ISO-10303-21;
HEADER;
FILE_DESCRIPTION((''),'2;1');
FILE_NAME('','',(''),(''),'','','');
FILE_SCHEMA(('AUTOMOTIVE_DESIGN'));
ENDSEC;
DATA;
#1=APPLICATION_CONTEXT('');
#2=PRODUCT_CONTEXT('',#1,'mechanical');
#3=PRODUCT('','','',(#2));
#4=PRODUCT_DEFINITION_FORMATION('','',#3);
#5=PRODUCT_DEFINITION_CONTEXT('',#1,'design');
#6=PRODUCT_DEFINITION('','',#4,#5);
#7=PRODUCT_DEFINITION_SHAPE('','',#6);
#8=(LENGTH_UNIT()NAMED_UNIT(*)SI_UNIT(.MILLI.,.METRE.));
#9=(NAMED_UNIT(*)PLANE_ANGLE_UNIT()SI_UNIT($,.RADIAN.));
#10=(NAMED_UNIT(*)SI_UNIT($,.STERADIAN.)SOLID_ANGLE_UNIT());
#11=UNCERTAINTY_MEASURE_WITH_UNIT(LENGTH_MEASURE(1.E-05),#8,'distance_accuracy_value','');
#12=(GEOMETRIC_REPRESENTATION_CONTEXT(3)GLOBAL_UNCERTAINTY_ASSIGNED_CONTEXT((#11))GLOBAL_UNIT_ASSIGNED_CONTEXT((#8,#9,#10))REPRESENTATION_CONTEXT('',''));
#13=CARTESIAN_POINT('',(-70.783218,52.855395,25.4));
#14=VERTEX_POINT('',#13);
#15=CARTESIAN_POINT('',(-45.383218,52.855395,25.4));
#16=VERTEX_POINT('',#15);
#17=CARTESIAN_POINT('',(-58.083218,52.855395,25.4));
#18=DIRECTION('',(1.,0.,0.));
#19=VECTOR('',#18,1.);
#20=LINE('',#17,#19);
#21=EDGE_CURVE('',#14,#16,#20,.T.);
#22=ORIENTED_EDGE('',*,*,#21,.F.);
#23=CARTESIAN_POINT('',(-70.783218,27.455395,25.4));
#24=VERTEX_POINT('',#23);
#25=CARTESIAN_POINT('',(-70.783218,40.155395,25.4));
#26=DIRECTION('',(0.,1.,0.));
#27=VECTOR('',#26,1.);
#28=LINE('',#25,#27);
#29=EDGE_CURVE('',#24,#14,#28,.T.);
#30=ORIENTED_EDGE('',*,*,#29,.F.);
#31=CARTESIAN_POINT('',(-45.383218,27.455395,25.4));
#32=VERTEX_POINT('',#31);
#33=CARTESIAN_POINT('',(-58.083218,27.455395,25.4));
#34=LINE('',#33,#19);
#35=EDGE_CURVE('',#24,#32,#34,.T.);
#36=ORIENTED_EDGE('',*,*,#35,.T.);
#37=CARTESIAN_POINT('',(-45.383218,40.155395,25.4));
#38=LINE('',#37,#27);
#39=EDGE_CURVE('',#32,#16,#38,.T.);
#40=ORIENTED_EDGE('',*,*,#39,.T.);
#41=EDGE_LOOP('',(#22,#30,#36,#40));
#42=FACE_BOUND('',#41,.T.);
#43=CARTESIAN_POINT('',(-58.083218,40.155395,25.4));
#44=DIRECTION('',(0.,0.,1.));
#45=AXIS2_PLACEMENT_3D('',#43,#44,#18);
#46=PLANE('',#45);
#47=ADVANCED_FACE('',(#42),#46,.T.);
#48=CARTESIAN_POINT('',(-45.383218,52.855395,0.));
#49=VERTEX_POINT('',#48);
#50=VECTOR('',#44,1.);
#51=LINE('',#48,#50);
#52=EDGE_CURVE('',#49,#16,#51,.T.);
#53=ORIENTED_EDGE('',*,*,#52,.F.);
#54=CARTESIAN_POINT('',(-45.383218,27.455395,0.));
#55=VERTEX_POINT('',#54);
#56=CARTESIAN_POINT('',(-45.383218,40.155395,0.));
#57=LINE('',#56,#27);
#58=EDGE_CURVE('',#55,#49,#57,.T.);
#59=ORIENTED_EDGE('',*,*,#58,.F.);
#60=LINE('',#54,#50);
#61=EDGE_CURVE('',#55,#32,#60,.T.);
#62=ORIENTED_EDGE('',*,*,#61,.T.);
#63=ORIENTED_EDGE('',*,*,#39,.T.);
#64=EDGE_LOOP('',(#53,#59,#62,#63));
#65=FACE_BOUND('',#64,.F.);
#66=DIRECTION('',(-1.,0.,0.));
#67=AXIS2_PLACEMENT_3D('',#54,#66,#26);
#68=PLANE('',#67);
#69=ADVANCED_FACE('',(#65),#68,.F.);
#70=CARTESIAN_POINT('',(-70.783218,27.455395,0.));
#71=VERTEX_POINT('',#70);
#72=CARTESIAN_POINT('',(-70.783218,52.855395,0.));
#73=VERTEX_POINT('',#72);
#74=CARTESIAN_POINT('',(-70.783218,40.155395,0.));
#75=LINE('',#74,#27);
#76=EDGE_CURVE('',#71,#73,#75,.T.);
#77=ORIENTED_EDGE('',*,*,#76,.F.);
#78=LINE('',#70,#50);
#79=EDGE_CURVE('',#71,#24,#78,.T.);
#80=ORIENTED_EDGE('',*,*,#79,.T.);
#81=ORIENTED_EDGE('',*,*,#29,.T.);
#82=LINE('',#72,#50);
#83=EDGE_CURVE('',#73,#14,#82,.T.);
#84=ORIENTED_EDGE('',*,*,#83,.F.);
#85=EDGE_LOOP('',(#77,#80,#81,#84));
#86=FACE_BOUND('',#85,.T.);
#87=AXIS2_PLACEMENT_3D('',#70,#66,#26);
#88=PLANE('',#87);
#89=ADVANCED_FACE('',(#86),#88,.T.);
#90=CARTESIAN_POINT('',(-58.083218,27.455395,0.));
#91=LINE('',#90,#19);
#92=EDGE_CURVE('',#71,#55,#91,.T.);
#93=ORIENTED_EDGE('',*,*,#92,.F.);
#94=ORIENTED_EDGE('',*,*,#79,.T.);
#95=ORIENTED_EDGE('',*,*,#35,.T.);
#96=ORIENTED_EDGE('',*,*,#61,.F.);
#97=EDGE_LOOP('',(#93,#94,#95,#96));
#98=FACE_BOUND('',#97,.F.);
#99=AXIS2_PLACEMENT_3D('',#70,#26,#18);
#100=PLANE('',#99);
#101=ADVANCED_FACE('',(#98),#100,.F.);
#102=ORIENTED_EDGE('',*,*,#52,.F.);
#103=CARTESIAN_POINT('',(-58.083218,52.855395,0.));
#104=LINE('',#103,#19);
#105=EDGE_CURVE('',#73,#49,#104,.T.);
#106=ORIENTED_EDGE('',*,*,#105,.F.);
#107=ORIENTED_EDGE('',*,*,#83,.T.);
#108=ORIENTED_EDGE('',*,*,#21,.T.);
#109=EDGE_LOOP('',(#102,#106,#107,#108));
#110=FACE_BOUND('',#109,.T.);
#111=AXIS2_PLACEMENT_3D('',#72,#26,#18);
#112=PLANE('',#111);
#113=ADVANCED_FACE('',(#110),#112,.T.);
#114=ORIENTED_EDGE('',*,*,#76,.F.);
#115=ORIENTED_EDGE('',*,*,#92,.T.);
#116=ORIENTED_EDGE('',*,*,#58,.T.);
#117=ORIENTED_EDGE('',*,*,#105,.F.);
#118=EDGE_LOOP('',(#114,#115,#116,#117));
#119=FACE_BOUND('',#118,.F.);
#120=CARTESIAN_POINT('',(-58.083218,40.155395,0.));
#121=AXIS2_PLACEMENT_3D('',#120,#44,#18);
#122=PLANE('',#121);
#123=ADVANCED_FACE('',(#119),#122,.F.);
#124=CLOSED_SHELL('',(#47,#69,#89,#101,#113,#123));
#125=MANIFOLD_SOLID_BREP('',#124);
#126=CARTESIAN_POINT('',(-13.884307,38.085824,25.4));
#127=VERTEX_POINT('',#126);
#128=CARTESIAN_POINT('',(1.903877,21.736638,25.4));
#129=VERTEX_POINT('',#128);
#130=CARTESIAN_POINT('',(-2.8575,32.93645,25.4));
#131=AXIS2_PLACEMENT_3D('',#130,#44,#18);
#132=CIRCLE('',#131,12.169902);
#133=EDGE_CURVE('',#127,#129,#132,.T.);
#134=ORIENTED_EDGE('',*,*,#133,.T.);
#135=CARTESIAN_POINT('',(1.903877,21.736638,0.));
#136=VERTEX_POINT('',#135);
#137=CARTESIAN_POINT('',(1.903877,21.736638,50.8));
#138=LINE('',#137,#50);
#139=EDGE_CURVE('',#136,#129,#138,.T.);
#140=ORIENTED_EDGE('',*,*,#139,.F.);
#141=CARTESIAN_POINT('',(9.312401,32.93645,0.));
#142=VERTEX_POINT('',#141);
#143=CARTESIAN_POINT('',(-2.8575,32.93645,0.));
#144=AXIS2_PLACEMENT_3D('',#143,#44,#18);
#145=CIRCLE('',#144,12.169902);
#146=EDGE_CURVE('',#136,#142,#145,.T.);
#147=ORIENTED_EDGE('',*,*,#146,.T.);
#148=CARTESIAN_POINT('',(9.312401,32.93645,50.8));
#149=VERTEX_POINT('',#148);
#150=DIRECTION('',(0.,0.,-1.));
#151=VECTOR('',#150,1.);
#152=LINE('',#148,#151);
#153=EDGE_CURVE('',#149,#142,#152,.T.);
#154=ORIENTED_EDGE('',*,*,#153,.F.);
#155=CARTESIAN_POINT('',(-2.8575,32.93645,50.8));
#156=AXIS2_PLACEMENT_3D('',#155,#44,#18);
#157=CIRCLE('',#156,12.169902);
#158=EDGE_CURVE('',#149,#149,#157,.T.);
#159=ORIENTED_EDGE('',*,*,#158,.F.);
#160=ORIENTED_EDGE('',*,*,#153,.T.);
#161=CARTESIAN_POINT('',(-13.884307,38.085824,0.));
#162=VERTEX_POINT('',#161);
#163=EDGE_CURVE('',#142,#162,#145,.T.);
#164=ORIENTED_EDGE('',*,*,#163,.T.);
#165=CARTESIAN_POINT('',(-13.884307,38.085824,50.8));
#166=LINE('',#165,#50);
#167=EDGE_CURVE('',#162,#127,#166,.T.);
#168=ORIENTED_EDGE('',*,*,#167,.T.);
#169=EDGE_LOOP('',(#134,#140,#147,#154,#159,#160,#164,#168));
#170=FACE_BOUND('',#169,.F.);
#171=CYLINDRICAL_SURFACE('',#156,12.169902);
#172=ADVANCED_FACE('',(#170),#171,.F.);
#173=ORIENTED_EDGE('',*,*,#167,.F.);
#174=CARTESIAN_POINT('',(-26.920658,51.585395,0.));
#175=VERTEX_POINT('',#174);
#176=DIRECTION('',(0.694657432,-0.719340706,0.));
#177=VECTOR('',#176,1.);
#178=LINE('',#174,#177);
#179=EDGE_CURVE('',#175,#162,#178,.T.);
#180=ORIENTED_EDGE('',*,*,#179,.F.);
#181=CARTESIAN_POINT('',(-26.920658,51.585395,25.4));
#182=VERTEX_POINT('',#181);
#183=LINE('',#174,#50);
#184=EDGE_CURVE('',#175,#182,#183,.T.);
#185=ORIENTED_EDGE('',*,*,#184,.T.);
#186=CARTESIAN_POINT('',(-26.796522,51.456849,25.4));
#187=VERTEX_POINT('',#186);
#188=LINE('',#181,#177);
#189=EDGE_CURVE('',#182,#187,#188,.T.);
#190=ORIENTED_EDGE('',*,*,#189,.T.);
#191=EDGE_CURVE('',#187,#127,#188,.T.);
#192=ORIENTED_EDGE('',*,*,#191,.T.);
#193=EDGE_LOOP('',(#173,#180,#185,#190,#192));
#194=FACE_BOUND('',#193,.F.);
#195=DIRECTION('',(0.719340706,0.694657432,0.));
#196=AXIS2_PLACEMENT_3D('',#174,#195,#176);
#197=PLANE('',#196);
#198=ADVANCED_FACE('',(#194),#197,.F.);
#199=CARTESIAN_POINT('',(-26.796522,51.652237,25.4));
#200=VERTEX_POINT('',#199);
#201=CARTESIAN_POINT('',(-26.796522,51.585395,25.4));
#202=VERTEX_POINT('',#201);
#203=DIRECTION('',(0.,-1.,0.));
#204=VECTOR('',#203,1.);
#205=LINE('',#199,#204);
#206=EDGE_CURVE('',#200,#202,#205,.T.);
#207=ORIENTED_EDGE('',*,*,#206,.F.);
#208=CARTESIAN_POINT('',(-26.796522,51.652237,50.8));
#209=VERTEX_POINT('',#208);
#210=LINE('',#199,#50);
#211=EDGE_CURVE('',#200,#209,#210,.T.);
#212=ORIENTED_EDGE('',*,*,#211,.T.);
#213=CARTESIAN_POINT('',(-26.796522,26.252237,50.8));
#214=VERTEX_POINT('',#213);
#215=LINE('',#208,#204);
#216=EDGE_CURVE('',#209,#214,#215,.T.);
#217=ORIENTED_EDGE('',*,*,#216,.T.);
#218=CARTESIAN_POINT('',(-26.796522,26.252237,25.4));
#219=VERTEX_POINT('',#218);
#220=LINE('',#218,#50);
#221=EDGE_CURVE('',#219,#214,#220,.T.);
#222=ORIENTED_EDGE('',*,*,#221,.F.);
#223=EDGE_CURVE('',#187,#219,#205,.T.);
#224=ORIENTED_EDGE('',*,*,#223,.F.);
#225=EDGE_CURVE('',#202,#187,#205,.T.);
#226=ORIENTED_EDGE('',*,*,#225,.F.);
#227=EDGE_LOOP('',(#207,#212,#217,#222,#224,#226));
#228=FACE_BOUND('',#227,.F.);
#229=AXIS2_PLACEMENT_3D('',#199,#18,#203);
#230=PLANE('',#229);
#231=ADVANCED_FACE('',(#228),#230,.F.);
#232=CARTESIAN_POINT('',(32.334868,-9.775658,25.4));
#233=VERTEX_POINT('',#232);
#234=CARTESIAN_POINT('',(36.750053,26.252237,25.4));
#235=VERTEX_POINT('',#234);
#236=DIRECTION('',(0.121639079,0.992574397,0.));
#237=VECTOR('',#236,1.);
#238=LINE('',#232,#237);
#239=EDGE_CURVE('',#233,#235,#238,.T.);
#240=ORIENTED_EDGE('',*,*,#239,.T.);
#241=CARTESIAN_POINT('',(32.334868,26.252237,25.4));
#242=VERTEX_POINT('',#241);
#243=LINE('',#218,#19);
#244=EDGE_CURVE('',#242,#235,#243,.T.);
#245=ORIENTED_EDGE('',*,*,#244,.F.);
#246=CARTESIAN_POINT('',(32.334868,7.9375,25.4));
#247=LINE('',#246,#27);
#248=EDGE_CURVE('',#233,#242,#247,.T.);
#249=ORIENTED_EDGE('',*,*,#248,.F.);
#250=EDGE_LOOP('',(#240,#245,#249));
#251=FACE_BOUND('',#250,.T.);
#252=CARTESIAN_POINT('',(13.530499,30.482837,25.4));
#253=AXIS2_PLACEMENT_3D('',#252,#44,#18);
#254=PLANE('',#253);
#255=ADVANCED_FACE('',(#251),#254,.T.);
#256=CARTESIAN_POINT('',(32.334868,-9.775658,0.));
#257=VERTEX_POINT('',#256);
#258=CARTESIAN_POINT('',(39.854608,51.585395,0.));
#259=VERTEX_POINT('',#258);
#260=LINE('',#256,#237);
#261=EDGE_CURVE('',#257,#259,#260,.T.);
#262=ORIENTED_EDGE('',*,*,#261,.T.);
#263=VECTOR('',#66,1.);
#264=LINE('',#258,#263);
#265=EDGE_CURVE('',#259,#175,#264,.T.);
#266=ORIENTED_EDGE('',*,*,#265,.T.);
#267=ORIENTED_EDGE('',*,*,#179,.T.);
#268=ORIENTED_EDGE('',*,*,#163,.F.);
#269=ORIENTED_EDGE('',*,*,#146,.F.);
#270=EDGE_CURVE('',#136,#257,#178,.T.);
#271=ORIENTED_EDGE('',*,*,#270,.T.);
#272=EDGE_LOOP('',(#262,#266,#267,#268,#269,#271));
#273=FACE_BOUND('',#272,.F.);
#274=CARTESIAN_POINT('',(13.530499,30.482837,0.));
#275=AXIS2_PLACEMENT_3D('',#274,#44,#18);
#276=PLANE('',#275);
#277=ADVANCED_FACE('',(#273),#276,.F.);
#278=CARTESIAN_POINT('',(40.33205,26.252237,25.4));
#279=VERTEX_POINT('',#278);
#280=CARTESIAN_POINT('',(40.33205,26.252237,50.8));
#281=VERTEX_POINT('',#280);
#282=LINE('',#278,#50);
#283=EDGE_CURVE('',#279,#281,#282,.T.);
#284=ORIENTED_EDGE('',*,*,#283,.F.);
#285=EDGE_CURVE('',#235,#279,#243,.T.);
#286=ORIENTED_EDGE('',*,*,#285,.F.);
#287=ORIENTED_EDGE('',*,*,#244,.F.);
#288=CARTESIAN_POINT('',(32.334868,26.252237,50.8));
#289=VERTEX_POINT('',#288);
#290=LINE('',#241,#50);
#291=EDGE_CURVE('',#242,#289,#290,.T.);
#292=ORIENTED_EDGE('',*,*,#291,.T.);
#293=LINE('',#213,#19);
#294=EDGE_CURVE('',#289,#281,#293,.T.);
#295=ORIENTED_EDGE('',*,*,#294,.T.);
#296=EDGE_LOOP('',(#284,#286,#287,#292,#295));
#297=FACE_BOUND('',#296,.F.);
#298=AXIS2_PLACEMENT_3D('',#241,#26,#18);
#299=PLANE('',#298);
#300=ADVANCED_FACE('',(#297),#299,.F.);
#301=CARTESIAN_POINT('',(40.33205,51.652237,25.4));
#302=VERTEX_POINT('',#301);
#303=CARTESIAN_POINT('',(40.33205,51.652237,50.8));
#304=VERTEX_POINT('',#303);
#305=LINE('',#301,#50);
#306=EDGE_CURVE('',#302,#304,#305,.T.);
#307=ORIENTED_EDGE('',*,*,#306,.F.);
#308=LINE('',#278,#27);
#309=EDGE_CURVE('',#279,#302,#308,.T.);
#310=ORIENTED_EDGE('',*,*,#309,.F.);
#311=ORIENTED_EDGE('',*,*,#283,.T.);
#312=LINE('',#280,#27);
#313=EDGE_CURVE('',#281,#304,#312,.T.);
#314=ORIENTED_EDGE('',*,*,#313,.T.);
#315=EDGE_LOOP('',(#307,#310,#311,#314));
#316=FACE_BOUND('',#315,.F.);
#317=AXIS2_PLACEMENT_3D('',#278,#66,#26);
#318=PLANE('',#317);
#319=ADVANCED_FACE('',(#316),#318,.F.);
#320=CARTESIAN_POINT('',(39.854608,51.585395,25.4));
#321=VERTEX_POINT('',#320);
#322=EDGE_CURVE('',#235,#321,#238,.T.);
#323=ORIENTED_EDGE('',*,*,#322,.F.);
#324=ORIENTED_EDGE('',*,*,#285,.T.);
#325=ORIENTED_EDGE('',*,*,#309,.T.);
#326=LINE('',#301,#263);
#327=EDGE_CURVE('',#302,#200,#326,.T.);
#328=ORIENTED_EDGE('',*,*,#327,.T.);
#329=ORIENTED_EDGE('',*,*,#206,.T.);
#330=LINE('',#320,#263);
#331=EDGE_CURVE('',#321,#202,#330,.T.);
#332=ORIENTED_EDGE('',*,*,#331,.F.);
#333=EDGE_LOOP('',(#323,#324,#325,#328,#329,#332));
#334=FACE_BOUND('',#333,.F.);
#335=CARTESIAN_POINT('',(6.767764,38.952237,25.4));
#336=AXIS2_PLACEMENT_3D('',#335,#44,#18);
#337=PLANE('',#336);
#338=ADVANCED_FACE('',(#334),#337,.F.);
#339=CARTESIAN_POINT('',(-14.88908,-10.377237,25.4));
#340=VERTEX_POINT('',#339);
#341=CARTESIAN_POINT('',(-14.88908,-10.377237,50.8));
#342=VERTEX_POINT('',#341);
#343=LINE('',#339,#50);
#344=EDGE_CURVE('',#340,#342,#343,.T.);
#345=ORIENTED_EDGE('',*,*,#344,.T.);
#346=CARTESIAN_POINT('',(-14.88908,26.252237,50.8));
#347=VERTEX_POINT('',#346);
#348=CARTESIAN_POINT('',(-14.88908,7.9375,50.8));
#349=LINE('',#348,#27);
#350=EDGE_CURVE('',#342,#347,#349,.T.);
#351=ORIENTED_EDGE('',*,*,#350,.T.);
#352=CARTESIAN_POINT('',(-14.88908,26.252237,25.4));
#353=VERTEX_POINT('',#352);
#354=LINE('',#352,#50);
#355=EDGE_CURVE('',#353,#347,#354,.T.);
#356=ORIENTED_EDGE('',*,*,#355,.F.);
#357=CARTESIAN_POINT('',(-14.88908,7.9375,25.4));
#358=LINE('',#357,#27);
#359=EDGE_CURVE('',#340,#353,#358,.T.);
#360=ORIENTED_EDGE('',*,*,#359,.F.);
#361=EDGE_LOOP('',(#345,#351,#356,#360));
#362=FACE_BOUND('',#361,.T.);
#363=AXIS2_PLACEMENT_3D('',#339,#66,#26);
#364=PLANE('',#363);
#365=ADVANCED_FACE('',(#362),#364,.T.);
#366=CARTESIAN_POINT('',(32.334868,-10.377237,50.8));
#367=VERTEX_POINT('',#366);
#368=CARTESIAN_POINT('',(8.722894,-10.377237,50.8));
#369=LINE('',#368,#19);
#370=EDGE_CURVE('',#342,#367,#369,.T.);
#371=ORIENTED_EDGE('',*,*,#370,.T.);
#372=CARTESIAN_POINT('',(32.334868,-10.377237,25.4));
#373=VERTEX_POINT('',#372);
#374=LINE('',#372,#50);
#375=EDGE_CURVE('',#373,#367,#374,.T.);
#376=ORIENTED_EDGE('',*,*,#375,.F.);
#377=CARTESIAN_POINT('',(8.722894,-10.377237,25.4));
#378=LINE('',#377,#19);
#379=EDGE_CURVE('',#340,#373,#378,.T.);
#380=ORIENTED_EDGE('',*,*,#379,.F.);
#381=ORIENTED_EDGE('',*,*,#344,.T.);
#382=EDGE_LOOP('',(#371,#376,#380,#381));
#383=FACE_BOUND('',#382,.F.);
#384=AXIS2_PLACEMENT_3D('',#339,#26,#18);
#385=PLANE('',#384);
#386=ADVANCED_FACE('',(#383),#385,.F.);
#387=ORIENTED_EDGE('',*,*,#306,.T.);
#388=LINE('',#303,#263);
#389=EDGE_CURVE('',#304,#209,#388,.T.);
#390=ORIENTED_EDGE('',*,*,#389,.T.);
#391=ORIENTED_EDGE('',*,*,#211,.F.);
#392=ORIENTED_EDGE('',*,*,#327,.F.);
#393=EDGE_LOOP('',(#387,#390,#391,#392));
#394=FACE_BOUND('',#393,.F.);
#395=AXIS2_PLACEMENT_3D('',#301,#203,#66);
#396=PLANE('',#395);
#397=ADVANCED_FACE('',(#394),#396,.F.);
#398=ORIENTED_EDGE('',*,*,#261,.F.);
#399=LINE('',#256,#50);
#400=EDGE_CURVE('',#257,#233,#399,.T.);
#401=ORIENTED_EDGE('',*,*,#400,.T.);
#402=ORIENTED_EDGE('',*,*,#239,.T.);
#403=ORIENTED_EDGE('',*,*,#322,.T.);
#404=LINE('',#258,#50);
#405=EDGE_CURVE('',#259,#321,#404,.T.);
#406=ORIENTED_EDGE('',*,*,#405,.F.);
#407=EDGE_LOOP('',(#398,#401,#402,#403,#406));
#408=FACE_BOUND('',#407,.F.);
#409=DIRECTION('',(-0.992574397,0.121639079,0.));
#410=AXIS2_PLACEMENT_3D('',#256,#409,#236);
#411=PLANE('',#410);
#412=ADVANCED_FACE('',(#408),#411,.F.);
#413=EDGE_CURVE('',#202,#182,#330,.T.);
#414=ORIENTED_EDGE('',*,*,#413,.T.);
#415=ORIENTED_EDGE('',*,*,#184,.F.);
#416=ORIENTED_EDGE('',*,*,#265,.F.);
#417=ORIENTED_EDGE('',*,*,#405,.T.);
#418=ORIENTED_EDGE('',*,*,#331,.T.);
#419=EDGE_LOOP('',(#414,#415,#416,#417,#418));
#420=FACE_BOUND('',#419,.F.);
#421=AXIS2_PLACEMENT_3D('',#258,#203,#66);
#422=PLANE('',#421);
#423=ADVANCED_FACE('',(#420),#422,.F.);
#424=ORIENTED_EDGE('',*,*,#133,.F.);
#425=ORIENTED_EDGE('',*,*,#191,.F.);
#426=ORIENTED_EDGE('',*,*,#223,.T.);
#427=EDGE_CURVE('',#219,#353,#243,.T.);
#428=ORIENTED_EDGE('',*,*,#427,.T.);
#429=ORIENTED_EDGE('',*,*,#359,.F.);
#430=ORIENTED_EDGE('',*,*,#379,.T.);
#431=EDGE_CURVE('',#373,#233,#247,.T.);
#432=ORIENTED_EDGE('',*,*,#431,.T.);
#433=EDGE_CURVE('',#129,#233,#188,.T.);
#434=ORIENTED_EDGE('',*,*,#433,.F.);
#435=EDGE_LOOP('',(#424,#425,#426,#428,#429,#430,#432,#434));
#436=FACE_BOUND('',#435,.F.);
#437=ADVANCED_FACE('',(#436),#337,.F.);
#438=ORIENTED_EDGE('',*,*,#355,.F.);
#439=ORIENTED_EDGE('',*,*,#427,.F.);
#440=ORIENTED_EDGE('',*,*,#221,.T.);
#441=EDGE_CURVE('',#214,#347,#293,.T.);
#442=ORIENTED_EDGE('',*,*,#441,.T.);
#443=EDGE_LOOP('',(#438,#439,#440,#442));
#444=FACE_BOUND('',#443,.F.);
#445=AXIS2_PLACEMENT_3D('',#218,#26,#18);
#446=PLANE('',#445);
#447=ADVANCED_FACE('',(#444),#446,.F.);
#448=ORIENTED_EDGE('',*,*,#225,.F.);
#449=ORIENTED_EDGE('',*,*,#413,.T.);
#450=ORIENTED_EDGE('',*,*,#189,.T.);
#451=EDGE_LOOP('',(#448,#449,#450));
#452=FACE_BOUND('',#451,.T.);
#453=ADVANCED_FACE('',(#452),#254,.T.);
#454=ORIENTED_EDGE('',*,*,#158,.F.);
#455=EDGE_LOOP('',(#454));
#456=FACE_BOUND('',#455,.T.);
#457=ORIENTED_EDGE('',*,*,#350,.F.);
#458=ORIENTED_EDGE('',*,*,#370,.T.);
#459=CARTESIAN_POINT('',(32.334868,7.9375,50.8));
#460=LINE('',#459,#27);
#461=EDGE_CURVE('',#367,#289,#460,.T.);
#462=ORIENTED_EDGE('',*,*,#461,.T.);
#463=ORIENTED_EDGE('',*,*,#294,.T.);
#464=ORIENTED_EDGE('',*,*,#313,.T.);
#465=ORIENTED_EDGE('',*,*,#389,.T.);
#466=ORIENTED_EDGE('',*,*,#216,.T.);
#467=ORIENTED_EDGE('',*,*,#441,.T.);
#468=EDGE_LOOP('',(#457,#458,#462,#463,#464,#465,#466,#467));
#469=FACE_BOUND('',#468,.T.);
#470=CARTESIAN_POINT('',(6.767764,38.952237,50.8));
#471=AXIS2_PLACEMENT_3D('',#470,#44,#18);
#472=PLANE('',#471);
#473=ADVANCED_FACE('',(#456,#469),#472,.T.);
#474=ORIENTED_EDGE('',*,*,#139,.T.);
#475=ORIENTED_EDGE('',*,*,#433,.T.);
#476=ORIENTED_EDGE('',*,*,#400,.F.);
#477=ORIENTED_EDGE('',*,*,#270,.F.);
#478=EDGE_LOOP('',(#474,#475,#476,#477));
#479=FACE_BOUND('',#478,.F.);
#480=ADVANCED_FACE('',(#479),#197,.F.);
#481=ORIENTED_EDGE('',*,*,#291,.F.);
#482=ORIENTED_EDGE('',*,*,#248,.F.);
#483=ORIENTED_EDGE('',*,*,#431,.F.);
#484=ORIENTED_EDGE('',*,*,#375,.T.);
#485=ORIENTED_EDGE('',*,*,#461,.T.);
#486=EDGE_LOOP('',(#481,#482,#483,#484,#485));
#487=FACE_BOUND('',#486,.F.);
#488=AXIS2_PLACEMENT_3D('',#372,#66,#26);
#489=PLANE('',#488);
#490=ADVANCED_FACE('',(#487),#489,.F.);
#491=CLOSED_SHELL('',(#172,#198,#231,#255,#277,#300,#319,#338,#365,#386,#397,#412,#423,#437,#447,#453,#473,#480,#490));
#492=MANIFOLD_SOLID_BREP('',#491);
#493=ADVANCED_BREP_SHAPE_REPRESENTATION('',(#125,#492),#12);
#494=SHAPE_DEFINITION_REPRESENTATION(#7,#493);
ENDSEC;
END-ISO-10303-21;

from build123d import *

# Parameters (mm, degrees)
F0_W     = 25.4
F0_H     = 25.4
F1_DEPTH = 25.4
F2_W     = 47.2239479423
F2_H     = 36.629473637
F3_DEPTH = 25.4
F5_DEPTH = 25.4
F6_R     = 12.1699018859
F7_DEPTH = 152.4


# Not quite as in the source:
# - a feature names something its author has since deleted; it is built from what else it names


with BuildPart() as f1:
    # F0 (on Top) → F1 (new body)
    with BuildSketch(Plane.XY):
        with Locations((-58.0832177849, 40.1553949341)):
            Rectangle(F0_W, F0_H)
    extrude(amount=F1_DEPTH)


with BuildPart() as f3:
    # F2 (on face) → F3 (new body)
    with BuildSketch(Plane.XY.offset(25.4)):
        Polygon((40.3320500055, 51.6522369951), (-26.7965224931, 51.6522369951), (-26.7965224931, 26.2522369951), (-14.8890800774, 26.2522369951), (32.3348678648, 26.2522369951), (40.3320500055, 26.2522369951), align=None)
        with Locations((8.7228938937, 7.9375001766)):
            Rectangle(F2_W, F2_H)
    extrude(amount=F3_DEPTH)

    # F4 (on Top) → F5 (join)
    with BuildSketch(Plane.XY):
        Polygon((39.8546084762, 51.5853948891), (-26.9206576049, 51.5853948891), (32.3348678648, -9.7756581381), align=None)
    extrude(amount=F5_DEPTH)

    # F6 (on face) → F7 (cut)
    with BuildSketch(Plane.XY.offset(50.8)):
        with Locations((-2.8575004544, 32.936450094)):
            Circle(F6_R)
    extrude(amount=-F7_DEPTH, mode=Mode.SUBTRACT)


solid = Compound([f1.part, f3.part])
